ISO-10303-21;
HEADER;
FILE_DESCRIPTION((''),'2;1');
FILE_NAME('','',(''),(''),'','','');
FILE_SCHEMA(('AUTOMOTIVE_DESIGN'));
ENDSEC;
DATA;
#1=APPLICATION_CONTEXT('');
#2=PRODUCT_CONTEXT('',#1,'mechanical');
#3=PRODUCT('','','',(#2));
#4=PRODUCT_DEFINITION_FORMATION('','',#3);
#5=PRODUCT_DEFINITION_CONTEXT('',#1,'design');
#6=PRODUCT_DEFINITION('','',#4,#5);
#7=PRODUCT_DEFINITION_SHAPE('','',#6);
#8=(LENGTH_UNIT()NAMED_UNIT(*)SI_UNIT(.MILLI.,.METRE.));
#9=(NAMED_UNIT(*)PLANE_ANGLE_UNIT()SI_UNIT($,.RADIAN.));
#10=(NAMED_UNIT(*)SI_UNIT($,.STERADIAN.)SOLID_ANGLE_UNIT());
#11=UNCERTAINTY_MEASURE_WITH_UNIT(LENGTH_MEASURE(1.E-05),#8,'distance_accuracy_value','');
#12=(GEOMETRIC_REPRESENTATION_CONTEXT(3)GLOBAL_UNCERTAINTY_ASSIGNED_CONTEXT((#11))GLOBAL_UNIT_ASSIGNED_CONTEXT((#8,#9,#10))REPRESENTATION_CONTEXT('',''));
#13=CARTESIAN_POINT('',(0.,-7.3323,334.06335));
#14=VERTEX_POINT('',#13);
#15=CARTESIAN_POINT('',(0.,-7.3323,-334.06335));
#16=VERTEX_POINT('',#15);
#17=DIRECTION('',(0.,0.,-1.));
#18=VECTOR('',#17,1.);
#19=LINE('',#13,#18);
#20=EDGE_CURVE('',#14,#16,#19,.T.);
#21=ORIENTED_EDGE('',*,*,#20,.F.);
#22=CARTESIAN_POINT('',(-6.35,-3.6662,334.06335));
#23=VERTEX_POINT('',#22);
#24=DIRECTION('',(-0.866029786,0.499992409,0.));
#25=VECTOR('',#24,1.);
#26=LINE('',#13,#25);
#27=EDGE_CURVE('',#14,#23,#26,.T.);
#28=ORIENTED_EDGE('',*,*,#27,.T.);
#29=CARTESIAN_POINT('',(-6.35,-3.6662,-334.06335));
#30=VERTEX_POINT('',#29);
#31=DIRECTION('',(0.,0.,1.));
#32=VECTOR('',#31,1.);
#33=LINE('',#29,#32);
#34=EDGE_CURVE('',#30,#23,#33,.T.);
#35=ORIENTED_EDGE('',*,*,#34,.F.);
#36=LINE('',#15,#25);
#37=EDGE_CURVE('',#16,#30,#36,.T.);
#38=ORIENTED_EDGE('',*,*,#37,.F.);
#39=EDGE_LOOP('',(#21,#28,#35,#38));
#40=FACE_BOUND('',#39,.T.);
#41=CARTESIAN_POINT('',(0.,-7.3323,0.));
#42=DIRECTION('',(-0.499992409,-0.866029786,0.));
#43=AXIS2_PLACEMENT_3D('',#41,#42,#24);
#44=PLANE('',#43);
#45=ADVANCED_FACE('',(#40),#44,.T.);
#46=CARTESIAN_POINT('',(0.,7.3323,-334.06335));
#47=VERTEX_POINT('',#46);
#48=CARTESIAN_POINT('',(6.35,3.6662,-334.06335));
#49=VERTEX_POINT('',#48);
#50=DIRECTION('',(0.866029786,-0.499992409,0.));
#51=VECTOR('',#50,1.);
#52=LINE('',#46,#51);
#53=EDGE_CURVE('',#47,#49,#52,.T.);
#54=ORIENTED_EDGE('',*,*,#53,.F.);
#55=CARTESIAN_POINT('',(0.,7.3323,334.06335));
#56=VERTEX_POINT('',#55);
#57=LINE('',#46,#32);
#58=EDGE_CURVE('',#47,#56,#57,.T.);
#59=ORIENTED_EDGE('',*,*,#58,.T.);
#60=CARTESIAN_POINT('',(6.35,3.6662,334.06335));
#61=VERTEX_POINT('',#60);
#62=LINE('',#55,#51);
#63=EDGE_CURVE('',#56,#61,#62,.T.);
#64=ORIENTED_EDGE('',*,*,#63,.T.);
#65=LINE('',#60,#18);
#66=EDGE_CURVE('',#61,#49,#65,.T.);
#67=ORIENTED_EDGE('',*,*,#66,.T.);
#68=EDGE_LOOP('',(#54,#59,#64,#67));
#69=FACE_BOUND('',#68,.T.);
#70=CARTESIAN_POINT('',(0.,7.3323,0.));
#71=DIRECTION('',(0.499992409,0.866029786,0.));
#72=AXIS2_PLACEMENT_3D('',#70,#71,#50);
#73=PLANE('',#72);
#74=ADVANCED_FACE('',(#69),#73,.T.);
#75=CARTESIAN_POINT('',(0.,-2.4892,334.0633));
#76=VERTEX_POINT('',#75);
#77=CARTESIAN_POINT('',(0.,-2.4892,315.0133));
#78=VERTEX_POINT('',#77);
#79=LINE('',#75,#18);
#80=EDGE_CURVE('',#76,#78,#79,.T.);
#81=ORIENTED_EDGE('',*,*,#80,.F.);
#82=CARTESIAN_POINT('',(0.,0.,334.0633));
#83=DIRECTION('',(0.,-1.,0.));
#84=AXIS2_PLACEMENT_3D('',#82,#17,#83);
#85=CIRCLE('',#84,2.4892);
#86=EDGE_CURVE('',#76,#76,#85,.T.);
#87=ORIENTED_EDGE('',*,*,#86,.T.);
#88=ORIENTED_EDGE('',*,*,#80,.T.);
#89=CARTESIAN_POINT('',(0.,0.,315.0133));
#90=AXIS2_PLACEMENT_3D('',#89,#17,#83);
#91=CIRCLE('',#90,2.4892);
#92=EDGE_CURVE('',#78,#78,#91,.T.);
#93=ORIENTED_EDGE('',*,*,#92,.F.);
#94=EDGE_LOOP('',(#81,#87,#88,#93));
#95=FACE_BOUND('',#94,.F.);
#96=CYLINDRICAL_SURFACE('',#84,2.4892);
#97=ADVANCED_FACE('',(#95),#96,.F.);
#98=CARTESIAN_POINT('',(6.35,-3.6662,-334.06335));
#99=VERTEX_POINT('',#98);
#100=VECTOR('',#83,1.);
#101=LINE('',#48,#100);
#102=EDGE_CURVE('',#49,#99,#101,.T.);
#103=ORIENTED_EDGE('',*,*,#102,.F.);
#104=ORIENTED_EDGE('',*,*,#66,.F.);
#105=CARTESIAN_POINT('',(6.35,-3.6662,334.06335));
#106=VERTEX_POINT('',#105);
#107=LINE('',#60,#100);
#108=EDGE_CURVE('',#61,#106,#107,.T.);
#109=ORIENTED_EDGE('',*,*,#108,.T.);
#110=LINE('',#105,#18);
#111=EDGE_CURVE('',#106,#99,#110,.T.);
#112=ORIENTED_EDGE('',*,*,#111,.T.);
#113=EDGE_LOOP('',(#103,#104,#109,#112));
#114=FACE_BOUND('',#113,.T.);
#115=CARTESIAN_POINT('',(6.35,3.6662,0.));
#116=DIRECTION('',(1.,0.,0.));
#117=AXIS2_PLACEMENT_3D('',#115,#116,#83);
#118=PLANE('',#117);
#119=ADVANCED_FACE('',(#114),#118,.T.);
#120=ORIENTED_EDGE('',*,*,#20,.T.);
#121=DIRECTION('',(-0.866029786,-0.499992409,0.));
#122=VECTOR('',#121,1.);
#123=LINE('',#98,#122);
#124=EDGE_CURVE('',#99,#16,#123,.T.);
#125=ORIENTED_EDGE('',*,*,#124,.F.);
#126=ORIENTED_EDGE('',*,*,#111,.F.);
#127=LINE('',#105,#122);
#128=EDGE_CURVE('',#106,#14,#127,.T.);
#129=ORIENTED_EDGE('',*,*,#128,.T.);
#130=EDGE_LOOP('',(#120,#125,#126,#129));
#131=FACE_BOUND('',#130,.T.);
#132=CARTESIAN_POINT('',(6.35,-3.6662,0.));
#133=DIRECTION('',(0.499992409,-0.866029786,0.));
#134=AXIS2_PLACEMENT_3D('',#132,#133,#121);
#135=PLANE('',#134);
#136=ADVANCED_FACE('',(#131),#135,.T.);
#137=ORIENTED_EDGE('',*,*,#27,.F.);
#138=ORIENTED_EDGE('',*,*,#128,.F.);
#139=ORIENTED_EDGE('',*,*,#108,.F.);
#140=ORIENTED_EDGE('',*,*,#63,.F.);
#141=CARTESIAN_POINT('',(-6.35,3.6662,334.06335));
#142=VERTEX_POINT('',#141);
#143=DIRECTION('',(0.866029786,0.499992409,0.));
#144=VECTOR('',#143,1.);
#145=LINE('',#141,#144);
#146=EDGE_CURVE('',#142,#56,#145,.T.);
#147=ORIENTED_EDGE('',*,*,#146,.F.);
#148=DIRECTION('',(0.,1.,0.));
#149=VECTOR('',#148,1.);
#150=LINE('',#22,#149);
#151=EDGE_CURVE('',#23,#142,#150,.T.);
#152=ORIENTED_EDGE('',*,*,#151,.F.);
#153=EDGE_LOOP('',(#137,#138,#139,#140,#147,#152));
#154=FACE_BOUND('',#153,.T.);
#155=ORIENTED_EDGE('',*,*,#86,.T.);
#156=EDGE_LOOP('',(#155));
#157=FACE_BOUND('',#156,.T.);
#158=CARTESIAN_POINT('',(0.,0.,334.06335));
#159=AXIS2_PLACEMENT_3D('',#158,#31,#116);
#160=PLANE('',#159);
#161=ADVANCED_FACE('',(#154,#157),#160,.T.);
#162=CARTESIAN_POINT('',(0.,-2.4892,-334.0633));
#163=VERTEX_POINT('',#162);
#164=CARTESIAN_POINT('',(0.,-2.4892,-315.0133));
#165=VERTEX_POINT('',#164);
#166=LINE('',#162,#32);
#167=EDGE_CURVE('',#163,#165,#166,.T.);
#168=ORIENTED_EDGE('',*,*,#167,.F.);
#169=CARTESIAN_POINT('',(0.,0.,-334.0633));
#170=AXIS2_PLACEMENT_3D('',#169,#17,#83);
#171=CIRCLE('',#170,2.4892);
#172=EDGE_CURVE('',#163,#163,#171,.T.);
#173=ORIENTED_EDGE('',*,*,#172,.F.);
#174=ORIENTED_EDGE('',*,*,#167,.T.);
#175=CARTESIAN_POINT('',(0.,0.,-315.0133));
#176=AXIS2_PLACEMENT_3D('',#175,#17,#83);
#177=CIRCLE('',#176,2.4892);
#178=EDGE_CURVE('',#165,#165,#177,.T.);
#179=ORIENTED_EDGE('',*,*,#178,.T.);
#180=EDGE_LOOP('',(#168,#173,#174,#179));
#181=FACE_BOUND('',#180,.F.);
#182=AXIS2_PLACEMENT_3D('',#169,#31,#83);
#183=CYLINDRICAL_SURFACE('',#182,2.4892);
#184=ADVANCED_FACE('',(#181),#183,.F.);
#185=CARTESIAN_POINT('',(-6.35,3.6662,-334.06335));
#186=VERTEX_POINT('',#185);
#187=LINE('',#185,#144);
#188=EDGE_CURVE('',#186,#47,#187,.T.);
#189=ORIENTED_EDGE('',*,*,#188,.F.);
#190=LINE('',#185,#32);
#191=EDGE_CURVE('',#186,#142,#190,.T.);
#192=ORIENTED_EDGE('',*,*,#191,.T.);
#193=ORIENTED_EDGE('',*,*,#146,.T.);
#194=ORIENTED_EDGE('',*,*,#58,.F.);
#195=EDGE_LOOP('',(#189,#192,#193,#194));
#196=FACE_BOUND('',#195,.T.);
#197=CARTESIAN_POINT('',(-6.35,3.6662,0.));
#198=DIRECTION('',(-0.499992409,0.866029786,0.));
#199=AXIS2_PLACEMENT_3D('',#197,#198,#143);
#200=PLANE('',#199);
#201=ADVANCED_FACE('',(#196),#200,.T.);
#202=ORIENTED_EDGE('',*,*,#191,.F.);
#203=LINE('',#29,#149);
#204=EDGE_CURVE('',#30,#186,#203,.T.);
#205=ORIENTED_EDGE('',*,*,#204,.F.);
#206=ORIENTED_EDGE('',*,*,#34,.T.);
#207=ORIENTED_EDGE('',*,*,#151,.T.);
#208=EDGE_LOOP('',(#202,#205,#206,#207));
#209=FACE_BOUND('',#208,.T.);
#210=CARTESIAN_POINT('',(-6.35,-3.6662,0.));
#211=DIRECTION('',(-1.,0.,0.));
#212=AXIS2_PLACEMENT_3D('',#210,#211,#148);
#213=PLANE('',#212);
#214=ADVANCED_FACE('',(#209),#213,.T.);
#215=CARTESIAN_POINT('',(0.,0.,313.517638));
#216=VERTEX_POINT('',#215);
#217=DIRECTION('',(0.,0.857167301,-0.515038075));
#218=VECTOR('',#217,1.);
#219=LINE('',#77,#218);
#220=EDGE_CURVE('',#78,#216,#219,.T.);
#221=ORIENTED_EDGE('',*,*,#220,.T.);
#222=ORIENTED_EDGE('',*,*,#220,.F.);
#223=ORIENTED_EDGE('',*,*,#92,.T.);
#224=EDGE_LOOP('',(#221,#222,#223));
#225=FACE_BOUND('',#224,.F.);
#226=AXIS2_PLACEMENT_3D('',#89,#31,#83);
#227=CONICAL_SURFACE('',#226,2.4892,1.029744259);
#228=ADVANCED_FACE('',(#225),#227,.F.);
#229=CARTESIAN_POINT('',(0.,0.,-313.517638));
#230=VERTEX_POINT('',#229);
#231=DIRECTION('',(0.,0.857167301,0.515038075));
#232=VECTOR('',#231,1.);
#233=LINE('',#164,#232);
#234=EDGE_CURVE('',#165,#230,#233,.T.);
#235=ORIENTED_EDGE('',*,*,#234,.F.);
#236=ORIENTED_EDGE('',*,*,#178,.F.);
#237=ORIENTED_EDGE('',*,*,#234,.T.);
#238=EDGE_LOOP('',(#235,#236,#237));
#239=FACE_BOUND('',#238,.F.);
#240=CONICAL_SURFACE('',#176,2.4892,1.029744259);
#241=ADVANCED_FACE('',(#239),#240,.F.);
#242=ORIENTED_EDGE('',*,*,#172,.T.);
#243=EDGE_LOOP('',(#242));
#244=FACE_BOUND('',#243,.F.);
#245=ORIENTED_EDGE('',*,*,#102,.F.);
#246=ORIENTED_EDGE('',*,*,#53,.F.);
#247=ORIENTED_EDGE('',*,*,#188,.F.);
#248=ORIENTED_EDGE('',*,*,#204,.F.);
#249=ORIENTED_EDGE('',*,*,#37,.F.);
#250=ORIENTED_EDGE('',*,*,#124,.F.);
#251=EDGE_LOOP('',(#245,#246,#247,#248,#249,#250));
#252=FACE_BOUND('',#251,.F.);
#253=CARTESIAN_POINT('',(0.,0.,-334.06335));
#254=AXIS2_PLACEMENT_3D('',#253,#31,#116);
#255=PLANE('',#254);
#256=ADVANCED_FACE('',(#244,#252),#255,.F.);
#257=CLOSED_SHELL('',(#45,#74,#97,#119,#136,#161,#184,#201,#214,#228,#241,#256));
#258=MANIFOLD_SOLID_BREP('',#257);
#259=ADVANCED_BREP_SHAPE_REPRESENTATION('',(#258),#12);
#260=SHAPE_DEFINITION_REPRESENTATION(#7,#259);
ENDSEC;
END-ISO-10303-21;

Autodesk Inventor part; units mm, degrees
ref_plane "YZ Plane" through (0, 0, 0) normal (1, 0, 0) x (0, 1, 0)
ref_plane "XZ Plane" through (0, 0, 0) normal (0, 1, 0) x (-1, 0, 0)
ref_plane "XY Plane" through (0, 0, 0) normal (0, 0, 1) x (1, 0, 0)
sketch "Sketch1" plane through (0, 0, 0) normal (0, 0, 1) x (1, 0, 0)
  line L0 (0, 7.3323) -> (6.35, 3.6662)
  line L1 (6.35, 3.6662) -> (6.35, -3.6662)
  line L2 (6.35, -3.6662) -> (0, -7.3323)
  line L3 (0, -7.3323) -> (-6.35, -3.6662)
  line L4 (-6.35, -3.6662) -> (-6.35, 3.6662)
  line L5 (-6.35, 3.6662) -> (0, 7.3323)
  point P0 (0, 0)
  point P1 (0, 0)
  dimension "d1" = 12.7
extrude "Extrusion1" add sketch "Sketch1" along normal mid plane 668.1267
sketch "Sketch2" plane through (0, 0, 334.0633) normal (0, 0, 1) x (1, 0, 0)
  point P0 (0, 0)
hole "Hole1" at (0, 0, 334.0633) direction (0, 0, -1) diameter 4.9784 depth 19.05 tip angle 118 thread size "1/4-20 UNC" class "2B" standard "ANSI Unified Screw Threads"
mirror "Mirror1" about plane through (0, 0, 0) normal (0, 0, 1) of "Hole1"
properties part number "0.5_Jack_Shaft" material "Aluminum, 6061-T6"
